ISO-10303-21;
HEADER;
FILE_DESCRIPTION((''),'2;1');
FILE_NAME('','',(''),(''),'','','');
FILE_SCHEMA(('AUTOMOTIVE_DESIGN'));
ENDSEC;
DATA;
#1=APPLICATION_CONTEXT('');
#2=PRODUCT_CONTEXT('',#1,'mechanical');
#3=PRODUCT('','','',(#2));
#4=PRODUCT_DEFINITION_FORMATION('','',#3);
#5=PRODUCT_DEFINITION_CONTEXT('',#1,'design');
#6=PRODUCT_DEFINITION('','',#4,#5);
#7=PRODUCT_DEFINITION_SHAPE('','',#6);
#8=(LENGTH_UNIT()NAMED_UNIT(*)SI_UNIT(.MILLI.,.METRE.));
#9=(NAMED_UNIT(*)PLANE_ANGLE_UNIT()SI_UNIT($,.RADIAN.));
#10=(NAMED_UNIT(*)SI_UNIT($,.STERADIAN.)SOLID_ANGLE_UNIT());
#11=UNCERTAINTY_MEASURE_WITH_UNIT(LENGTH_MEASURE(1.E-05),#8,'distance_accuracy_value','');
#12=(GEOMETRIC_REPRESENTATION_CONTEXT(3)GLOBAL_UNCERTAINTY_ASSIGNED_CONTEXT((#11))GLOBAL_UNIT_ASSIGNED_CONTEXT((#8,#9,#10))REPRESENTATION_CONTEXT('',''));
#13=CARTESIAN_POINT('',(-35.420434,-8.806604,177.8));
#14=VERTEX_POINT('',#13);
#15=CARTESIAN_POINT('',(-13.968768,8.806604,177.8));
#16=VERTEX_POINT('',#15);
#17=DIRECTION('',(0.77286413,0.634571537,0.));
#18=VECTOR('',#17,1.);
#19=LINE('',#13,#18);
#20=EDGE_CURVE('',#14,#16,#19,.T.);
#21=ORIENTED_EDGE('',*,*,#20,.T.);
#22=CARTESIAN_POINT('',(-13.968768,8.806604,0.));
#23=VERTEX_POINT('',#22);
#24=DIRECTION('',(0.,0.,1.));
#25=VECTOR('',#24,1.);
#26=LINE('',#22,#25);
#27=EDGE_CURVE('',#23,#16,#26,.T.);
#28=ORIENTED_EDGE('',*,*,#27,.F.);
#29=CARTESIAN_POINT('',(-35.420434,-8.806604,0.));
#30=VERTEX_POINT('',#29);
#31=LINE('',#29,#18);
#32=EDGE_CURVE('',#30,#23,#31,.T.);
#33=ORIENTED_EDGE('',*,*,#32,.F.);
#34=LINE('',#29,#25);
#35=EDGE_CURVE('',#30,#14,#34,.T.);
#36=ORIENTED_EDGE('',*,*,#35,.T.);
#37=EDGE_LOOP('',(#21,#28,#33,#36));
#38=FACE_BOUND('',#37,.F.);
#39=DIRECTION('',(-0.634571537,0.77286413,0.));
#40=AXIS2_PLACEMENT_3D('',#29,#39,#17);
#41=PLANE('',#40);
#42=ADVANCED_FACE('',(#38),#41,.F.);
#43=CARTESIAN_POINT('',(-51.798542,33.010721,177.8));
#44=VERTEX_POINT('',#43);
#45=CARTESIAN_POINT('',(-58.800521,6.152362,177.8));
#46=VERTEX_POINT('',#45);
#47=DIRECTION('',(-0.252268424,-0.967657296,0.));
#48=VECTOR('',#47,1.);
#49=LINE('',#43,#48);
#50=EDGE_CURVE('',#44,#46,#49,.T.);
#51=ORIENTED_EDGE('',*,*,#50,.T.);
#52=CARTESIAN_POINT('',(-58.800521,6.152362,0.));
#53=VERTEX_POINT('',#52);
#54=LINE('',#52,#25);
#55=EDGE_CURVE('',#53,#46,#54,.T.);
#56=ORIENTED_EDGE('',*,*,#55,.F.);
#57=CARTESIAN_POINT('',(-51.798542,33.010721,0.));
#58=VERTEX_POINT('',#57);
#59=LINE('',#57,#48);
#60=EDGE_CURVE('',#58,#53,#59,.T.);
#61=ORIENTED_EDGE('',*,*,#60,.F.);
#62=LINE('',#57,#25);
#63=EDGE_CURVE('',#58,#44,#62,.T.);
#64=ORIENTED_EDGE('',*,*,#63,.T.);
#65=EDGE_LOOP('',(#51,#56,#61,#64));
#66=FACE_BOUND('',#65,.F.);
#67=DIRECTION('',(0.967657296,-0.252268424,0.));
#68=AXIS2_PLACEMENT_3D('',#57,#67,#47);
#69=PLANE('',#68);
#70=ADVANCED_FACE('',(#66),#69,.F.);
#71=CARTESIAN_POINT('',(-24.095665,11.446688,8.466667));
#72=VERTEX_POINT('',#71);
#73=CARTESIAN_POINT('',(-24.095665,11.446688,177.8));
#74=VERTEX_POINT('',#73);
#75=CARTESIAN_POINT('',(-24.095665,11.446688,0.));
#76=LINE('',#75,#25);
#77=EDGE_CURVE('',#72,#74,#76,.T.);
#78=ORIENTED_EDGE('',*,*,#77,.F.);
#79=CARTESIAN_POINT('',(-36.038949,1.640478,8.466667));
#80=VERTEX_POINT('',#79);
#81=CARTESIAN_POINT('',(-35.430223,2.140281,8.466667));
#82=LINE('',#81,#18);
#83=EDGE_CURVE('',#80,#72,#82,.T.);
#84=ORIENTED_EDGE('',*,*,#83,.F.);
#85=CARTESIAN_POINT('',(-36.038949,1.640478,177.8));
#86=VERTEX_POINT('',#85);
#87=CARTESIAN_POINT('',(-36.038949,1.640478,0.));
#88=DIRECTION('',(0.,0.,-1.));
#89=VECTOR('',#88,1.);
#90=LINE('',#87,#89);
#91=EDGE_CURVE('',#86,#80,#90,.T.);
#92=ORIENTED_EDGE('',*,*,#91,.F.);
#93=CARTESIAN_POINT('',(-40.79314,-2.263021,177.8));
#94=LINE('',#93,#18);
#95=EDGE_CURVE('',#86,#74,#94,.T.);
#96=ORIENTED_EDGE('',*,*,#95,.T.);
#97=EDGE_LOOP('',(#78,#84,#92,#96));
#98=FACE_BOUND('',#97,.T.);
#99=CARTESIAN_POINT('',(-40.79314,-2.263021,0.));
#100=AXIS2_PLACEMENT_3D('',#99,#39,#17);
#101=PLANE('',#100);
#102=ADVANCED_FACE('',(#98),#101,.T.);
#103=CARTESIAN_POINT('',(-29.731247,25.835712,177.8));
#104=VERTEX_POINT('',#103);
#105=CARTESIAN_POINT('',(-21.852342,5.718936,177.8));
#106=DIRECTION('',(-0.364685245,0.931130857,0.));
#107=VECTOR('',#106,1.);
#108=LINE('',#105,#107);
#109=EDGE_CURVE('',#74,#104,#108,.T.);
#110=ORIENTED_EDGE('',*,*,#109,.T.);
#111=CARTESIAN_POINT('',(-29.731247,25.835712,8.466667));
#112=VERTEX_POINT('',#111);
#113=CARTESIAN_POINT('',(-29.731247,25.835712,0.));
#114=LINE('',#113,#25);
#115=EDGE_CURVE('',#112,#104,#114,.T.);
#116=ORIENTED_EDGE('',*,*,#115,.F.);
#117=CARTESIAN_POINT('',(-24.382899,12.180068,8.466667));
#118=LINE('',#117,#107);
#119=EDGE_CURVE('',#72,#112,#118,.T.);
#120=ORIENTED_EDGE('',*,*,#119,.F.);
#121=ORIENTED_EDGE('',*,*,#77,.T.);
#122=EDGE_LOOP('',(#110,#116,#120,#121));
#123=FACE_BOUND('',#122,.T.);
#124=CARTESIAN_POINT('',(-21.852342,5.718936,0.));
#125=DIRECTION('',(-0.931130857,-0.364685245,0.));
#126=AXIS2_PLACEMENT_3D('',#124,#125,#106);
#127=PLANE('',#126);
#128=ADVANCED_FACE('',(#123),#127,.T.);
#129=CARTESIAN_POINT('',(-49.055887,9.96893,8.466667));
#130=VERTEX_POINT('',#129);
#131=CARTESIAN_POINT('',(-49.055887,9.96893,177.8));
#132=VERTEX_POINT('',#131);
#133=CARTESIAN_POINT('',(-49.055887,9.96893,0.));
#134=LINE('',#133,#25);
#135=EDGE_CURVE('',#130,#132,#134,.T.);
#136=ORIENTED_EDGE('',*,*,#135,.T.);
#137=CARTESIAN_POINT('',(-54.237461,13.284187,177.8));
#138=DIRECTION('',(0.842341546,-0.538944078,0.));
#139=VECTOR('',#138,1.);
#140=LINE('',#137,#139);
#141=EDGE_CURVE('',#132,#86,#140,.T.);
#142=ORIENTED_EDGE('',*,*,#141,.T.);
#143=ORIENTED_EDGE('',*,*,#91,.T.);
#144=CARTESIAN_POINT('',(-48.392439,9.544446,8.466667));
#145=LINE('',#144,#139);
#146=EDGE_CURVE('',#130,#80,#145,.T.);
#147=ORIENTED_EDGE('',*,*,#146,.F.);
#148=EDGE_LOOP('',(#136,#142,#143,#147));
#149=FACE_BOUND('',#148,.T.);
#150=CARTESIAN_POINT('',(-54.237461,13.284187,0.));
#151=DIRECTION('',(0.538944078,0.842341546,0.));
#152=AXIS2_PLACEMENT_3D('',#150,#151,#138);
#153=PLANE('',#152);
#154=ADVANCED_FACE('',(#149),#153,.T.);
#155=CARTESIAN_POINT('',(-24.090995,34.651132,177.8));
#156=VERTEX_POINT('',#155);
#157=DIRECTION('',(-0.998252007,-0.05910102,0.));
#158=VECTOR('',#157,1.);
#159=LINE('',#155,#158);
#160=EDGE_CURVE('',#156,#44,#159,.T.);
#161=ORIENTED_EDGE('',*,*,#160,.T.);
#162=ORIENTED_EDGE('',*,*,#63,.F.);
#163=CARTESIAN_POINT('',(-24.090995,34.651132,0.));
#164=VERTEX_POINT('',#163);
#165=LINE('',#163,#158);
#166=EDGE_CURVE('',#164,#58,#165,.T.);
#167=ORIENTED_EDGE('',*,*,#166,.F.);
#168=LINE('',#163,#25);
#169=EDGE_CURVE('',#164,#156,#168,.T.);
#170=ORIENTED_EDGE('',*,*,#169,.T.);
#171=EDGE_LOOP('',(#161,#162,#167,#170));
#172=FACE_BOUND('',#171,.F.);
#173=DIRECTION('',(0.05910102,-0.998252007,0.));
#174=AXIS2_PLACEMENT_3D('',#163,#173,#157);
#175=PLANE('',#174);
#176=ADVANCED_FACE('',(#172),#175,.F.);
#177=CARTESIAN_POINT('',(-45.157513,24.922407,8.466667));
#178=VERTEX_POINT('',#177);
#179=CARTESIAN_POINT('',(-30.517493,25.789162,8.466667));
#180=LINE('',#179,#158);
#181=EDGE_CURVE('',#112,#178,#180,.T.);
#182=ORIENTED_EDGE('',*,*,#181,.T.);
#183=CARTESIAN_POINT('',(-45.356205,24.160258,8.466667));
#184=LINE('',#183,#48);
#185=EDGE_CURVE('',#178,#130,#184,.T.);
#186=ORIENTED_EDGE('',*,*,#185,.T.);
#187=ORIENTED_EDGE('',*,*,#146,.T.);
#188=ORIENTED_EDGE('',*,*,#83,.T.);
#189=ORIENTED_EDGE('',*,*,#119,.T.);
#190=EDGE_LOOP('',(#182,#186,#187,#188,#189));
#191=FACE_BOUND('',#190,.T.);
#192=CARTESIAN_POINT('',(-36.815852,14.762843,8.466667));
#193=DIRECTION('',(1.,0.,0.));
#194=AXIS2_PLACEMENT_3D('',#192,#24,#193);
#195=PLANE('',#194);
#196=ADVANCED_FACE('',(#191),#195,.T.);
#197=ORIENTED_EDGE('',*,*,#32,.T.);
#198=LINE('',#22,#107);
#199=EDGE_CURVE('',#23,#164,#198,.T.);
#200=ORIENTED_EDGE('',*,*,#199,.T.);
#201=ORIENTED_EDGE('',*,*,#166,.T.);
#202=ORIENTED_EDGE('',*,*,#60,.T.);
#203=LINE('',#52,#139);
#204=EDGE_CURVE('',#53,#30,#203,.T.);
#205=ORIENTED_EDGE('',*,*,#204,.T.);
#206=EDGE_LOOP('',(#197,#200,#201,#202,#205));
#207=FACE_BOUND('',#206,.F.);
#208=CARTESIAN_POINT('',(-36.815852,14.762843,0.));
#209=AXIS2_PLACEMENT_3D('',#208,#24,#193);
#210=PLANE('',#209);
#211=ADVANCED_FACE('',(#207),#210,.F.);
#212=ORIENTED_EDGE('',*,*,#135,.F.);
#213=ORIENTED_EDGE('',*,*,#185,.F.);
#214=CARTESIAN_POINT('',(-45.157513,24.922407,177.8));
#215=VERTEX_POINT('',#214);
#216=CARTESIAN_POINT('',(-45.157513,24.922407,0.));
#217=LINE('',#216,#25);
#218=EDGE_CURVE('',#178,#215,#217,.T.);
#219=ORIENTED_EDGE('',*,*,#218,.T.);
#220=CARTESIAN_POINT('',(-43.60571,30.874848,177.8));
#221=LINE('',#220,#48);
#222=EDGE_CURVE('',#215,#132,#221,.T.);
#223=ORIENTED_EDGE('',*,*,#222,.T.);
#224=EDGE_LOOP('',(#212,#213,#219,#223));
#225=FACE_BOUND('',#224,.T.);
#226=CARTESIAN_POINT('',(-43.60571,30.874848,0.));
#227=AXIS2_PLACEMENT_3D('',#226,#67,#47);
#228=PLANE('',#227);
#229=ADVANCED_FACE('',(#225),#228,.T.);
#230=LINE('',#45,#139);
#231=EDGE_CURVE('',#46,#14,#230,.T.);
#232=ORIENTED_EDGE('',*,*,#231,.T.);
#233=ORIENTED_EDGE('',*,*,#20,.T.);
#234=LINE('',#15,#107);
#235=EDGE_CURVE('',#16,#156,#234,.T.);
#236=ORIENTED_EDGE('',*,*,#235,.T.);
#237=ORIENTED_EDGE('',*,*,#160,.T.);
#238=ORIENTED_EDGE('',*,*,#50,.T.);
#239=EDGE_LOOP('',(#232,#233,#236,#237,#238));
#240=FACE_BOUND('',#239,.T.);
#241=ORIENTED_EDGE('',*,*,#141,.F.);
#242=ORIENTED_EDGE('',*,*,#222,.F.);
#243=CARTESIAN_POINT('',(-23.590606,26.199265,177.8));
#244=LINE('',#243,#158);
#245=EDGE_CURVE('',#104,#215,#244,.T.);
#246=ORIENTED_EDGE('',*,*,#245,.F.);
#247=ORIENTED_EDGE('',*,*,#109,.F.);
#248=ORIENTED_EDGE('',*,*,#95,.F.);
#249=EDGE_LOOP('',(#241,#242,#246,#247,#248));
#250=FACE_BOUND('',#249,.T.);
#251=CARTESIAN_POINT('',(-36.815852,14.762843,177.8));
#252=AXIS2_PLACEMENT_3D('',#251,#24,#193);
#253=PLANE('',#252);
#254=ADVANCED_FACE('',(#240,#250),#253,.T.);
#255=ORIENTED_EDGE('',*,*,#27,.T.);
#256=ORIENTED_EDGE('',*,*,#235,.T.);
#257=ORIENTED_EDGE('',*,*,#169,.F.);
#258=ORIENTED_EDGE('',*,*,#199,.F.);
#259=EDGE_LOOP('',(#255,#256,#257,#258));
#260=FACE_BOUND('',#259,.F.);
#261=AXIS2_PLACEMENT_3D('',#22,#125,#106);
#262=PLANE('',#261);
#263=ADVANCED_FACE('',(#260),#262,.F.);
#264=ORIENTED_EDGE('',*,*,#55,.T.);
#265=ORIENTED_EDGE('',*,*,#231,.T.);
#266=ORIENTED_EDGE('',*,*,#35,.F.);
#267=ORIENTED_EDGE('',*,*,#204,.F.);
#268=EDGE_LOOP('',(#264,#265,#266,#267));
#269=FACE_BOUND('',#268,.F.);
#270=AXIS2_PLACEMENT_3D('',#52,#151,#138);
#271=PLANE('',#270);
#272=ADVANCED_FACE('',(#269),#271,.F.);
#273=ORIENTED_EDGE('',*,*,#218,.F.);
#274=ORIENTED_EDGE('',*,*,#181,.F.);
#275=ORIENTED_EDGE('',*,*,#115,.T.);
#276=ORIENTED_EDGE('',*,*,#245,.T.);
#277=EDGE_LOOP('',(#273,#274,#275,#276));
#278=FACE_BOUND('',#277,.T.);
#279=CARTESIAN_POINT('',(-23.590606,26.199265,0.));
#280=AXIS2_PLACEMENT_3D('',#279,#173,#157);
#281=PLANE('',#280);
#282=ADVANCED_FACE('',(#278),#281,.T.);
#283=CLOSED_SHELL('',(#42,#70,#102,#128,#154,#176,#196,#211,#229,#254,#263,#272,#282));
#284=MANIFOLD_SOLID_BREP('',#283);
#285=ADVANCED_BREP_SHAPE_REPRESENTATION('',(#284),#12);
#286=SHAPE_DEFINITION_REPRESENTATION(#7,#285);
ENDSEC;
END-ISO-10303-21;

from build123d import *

# Parameters (mm, degrees)
F1_DEPTH = 177.8
F2_T     = -8.4666666667


# Not quite as in the source:
# - a length typed as a fraction of an inch, garbled in the dataset ("3 / 203.2 mm" for 3/8 in), is restored


with BuildPart() as f1:
    # F0 (on Top) → F1 (new body)
    with BuildSketch(Plane.XY):
        Polygon((-35.4204343678, -8.8066042373), (-13.96876778, 8.8066042373), (-24.0909949393, 34.6511322751), (-51.7985419534, 33.0107205511), (-58.8005205937, 6.1523623123), align=None)
    extrude(amount=F1_DEPTH)

    # F2
    f2_openings = [f1.faces().sort_by_distance(p)[0] for p in [
        (-36.815852, 14.762843, 177.8),
    ]]
    offset(amount=F2_T, openings=f2_openings)


solid = f1.part
